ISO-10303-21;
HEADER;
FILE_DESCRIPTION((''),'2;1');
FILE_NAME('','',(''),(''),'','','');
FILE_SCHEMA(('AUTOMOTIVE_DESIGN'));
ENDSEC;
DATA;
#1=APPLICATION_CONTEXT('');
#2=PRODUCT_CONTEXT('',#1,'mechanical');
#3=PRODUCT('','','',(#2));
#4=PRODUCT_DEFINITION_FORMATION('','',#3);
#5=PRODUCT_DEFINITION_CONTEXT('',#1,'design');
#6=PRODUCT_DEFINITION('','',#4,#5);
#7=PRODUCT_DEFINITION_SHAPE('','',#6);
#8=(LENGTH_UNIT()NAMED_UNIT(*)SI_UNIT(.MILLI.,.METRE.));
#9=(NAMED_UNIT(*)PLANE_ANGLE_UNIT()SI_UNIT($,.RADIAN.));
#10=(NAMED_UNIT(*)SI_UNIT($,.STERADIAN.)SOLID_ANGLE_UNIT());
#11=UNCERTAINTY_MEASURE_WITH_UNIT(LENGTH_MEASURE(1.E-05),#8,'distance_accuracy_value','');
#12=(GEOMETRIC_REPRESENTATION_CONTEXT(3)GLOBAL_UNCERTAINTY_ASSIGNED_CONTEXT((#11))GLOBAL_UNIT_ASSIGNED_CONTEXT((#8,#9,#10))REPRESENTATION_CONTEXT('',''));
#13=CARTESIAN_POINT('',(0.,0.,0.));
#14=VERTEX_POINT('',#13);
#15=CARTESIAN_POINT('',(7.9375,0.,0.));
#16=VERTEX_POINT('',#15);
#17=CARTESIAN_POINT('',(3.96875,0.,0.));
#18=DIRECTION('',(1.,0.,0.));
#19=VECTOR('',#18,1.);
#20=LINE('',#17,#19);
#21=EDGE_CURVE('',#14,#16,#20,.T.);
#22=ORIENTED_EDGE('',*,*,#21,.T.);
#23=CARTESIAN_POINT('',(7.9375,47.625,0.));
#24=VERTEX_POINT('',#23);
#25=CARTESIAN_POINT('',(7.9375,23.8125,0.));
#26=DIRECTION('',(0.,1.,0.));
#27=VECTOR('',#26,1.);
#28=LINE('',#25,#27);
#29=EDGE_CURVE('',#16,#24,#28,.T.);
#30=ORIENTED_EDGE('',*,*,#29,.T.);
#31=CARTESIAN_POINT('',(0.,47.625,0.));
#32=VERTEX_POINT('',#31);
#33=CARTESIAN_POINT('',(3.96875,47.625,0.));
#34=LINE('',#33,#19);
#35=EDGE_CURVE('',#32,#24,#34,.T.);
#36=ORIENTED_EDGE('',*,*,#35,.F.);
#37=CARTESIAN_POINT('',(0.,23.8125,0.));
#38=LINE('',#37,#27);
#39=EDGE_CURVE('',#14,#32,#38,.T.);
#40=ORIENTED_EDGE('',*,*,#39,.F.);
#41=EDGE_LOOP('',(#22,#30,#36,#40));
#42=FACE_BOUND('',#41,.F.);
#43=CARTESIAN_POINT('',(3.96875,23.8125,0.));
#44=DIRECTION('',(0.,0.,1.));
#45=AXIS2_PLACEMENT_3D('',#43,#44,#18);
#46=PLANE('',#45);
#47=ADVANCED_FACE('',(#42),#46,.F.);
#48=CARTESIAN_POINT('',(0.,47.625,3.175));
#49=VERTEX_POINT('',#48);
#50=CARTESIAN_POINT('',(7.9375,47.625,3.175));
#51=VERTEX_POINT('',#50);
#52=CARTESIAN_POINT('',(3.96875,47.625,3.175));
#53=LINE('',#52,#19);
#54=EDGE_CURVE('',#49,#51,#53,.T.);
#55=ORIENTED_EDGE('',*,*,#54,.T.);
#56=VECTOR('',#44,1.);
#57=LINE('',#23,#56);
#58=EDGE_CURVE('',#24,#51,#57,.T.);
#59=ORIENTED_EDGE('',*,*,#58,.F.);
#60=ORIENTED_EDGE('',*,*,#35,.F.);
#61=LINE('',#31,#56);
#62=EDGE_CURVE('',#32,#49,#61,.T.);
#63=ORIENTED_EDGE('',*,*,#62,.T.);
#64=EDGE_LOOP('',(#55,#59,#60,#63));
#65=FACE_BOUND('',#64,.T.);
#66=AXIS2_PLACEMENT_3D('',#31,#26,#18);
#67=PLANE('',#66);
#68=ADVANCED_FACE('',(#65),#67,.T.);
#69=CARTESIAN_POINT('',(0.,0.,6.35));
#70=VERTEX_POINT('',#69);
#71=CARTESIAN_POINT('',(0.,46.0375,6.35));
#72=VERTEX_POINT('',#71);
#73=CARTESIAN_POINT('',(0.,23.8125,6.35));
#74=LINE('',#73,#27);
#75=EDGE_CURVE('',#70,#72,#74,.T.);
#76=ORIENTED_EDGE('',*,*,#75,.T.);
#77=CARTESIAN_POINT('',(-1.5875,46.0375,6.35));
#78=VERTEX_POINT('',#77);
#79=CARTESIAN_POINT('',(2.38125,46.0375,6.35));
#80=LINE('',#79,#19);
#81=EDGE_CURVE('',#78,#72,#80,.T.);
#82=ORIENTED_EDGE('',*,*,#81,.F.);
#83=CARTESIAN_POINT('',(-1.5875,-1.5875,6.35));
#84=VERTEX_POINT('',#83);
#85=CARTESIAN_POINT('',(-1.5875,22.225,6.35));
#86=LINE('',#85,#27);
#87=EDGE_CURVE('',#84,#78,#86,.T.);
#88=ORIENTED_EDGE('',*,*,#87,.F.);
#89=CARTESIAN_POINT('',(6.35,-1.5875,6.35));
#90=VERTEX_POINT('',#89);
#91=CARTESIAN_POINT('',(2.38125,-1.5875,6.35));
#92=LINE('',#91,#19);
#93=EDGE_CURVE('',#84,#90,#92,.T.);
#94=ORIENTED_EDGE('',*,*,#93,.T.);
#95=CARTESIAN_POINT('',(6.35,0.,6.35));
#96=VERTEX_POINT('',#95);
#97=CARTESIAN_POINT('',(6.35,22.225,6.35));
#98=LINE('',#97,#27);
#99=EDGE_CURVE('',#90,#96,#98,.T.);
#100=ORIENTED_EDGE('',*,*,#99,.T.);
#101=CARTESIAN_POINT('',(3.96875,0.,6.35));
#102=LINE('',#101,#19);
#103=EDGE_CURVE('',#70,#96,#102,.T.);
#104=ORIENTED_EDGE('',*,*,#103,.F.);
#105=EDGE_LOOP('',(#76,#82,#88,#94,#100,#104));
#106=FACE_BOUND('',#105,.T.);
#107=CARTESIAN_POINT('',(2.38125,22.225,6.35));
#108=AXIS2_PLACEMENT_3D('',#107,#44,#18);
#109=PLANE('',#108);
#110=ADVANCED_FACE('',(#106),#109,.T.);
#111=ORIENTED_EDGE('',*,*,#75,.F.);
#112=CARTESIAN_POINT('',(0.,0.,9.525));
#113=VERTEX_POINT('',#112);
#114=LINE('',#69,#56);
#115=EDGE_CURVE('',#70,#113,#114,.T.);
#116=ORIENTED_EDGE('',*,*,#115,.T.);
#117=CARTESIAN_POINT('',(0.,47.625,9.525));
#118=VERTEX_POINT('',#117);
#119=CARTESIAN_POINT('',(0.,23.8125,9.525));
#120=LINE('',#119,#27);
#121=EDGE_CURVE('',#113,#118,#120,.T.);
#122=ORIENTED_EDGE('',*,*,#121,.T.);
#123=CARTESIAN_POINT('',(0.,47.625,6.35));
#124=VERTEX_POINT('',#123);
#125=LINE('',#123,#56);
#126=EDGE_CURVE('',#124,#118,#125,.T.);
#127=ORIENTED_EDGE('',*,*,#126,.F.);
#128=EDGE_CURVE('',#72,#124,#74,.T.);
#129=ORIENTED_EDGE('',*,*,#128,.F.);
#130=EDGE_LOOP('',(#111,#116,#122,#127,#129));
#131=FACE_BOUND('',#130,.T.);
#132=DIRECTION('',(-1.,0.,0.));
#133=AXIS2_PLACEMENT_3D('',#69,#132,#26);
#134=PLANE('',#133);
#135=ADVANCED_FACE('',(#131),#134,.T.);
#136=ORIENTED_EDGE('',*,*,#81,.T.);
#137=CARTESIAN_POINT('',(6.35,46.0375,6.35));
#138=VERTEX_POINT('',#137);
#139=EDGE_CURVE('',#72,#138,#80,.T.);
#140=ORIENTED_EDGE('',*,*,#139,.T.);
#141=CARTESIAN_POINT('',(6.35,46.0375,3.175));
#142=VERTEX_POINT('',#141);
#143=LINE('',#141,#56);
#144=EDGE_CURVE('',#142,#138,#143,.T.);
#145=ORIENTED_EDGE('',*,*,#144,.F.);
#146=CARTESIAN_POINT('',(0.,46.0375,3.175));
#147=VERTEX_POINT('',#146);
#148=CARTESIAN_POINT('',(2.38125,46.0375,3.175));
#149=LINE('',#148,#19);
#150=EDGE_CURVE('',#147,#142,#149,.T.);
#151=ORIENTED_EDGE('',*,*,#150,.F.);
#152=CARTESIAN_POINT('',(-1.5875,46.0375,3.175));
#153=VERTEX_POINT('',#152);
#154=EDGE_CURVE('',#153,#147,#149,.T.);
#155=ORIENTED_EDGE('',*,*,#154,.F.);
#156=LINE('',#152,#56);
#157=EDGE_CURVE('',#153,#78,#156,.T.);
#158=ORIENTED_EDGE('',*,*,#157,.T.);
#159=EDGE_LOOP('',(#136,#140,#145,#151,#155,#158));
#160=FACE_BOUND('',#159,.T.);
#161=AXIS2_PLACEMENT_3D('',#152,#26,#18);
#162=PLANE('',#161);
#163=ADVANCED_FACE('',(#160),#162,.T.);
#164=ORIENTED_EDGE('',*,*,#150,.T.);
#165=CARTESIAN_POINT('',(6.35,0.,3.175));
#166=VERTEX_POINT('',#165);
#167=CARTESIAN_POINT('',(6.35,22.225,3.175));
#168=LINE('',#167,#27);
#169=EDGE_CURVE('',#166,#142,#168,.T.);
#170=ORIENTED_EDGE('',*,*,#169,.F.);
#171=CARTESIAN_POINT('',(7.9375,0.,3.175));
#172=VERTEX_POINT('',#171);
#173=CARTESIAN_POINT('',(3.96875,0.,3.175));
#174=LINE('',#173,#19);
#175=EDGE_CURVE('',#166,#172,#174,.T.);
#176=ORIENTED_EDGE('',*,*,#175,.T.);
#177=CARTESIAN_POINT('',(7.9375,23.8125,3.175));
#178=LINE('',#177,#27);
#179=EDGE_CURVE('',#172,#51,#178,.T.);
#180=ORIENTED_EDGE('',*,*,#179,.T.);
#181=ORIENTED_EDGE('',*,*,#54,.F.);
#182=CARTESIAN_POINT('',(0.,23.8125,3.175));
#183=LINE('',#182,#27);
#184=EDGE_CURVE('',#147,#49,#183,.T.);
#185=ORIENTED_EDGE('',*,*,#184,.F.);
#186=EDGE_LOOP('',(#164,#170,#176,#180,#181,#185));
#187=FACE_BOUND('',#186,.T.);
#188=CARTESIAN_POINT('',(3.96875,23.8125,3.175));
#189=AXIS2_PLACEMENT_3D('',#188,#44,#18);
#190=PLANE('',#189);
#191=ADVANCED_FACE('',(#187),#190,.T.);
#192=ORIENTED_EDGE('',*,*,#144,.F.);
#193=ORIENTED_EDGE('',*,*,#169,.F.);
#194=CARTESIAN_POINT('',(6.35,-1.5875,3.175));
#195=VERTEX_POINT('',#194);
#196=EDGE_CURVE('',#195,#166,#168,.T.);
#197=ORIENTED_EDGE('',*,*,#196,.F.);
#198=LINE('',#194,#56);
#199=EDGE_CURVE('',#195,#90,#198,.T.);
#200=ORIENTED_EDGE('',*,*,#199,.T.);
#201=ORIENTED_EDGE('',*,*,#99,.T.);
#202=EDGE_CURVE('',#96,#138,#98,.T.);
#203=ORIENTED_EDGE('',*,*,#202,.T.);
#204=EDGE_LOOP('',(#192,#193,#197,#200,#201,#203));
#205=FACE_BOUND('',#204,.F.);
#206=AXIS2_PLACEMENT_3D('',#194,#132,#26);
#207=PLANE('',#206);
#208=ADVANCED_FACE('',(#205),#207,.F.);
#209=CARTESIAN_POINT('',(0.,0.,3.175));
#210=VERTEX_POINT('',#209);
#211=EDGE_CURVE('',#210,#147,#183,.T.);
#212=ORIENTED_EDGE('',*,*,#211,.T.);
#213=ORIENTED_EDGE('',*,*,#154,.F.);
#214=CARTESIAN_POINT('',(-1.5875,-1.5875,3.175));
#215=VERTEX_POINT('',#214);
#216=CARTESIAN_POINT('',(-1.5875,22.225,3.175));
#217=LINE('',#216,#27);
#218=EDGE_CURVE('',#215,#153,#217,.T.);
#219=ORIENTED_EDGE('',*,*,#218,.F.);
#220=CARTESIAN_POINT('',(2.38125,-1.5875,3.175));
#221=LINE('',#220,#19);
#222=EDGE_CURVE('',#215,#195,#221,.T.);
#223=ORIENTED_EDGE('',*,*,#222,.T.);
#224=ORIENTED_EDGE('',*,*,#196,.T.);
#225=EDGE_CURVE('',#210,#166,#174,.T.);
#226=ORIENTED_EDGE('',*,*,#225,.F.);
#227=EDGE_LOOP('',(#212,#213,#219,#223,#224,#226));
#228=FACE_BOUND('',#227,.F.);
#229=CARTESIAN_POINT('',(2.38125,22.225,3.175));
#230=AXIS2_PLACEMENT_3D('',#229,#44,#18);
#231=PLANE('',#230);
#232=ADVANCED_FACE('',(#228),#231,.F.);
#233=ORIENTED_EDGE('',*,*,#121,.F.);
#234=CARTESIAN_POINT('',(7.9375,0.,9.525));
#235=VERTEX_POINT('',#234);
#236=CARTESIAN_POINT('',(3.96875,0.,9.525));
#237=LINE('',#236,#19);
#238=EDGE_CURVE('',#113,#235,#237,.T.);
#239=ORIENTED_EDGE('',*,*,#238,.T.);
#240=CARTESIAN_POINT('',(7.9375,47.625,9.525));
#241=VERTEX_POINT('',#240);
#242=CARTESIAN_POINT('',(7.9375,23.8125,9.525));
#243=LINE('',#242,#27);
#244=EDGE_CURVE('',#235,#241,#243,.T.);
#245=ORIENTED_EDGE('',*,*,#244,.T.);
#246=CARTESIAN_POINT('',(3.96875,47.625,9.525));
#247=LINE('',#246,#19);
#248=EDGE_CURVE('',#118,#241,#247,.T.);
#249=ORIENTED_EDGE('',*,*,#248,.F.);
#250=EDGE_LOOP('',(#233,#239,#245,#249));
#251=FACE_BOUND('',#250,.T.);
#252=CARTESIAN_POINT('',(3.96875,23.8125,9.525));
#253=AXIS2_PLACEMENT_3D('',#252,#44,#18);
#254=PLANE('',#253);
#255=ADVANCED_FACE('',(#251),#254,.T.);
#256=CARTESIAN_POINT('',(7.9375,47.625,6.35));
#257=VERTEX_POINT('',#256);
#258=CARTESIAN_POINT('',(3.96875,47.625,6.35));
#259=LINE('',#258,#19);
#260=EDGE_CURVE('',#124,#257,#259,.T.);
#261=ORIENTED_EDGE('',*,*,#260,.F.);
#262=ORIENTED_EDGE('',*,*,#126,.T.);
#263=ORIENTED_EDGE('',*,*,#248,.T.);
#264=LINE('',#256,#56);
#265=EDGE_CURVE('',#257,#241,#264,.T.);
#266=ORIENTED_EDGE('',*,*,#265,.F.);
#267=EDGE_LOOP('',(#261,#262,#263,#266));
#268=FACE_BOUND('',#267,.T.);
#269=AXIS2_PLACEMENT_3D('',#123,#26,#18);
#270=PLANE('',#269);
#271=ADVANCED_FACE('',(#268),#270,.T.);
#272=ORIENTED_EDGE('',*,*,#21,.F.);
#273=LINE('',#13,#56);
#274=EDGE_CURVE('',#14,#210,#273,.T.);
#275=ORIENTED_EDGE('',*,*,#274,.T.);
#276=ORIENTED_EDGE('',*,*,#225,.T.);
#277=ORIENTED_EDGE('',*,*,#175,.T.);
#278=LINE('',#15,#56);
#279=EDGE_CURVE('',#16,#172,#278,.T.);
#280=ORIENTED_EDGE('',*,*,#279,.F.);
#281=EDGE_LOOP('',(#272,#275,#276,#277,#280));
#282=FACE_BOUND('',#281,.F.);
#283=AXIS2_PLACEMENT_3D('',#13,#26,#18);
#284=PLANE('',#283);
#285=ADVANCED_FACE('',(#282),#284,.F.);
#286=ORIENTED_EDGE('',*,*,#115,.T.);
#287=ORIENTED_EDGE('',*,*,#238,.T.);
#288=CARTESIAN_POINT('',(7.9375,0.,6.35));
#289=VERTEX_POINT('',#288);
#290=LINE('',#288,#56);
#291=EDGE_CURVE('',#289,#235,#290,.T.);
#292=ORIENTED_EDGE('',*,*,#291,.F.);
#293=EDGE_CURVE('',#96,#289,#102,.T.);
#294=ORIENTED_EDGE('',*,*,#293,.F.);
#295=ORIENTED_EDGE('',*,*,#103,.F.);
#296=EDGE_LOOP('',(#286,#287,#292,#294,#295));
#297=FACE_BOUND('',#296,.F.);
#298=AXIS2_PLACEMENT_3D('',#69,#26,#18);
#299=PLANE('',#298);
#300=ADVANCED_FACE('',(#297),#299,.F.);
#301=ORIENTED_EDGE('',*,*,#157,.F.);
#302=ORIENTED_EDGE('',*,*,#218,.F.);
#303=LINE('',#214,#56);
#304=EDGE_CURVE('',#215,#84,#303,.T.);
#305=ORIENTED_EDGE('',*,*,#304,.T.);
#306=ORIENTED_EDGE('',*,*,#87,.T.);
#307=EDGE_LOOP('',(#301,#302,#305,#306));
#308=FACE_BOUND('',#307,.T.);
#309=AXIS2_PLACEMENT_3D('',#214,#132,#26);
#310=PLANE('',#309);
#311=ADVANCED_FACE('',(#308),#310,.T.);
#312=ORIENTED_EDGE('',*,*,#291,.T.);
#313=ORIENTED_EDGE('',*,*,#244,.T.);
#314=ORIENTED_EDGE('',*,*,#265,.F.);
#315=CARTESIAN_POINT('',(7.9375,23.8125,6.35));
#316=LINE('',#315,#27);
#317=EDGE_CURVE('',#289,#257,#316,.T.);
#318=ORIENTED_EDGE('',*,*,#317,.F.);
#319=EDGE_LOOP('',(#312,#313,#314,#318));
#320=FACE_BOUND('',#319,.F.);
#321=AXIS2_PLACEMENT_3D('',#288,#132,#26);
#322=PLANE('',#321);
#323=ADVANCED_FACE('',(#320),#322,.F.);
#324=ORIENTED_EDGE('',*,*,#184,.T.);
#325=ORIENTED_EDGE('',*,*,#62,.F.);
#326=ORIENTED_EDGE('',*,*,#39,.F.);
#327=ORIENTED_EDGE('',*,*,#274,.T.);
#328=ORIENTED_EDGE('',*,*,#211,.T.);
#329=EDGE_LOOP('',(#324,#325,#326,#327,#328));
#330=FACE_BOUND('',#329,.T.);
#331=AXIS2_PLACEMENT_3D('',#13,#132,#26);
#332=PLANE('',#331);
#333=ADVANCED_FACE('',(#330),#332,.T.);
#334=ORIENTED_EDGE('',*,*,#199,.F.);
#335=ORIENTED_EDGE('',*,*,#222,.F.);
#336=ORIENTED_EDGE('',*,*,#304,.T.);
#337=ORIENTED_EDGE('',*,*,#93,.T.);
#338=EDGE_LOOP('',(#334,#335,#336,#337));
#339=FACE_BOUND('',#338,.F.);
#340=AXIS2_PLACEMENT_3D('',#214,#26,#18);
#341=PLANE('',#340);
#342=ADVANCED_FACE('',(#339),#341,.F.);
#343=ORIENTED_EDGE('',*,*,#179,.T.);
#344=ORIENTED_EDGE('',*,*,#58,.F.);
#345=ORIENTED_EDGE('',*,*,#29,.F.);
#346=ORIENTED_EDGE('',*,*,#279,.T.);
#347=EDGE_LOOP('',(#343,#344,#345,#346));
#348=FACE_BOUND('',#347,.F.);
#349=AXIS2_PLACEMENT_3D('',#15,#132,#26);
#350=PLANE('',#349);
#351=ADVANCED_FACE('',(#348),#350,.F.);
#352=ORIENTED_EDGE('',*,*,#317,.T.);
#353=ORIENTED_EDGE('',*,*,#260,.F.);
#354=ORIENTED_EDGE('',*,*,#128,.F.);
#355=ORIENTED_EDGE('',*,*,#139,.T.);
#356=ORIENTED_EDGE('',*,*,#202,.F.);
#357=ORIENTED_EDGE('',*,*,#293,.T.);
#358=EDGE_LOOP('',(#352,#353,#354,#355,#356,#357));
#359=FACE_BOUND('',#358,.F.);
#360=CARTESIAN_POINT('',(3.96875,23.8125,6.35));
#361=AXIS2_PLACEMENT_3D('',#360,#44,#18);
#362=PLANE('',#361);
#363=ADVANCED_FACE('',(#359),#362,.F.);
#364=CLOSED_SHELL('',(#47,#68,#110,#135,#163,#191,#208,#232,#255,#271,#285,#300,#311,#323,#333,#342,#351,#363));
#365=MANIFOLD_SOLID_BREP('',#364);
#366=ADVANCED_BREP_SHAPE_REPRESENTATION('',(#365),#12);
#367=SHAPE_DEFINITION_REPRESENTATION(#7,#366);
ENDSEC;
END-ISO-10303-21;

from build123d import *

# Parameters (mm, degrees)
F2_W     = 7.9375
F2_H     = 47.625
F3_DEPTH = 3.175
F4_W     = 7.9375
F4_H     = 47.625
F5_DEPTH = 3.175
F6_W     = 7.9375
F6_H     = 47.625
F7_DEPTH = 3.175


# Not quite as in the source:
# - a variable given as a bare number and used for a length is read in inches; the dataset says mm whatever the document's units were


with BuildPart() as f3:
    # F2 (on Top) → F3 (new body)
    with BuildSketch(Plane.XY):
        with Locations((3.96875, 23.8125)):
            Rectangle(F2_W, F2_H)
    extrude(amount=F3_DEPTH)

    # F4 (on face) → F5 (join)
    with BuildSketch(Plane.XY.offset(3.175)):
        with Locations((2.38125, 22.225)):
            Rectangle(F4_W, F4_H)
    extrude(amount=F5_DEPTH)

    # F6 (on face) → F7 (join)
    with BuildSketch(Plane.XY.offset(6.35)):
        with Locations((3.96875, 23.8125)):
            Rectangle(F6_W, F6_H)
    extrude(amount=F7_DEPTH)


solid = f3.part
